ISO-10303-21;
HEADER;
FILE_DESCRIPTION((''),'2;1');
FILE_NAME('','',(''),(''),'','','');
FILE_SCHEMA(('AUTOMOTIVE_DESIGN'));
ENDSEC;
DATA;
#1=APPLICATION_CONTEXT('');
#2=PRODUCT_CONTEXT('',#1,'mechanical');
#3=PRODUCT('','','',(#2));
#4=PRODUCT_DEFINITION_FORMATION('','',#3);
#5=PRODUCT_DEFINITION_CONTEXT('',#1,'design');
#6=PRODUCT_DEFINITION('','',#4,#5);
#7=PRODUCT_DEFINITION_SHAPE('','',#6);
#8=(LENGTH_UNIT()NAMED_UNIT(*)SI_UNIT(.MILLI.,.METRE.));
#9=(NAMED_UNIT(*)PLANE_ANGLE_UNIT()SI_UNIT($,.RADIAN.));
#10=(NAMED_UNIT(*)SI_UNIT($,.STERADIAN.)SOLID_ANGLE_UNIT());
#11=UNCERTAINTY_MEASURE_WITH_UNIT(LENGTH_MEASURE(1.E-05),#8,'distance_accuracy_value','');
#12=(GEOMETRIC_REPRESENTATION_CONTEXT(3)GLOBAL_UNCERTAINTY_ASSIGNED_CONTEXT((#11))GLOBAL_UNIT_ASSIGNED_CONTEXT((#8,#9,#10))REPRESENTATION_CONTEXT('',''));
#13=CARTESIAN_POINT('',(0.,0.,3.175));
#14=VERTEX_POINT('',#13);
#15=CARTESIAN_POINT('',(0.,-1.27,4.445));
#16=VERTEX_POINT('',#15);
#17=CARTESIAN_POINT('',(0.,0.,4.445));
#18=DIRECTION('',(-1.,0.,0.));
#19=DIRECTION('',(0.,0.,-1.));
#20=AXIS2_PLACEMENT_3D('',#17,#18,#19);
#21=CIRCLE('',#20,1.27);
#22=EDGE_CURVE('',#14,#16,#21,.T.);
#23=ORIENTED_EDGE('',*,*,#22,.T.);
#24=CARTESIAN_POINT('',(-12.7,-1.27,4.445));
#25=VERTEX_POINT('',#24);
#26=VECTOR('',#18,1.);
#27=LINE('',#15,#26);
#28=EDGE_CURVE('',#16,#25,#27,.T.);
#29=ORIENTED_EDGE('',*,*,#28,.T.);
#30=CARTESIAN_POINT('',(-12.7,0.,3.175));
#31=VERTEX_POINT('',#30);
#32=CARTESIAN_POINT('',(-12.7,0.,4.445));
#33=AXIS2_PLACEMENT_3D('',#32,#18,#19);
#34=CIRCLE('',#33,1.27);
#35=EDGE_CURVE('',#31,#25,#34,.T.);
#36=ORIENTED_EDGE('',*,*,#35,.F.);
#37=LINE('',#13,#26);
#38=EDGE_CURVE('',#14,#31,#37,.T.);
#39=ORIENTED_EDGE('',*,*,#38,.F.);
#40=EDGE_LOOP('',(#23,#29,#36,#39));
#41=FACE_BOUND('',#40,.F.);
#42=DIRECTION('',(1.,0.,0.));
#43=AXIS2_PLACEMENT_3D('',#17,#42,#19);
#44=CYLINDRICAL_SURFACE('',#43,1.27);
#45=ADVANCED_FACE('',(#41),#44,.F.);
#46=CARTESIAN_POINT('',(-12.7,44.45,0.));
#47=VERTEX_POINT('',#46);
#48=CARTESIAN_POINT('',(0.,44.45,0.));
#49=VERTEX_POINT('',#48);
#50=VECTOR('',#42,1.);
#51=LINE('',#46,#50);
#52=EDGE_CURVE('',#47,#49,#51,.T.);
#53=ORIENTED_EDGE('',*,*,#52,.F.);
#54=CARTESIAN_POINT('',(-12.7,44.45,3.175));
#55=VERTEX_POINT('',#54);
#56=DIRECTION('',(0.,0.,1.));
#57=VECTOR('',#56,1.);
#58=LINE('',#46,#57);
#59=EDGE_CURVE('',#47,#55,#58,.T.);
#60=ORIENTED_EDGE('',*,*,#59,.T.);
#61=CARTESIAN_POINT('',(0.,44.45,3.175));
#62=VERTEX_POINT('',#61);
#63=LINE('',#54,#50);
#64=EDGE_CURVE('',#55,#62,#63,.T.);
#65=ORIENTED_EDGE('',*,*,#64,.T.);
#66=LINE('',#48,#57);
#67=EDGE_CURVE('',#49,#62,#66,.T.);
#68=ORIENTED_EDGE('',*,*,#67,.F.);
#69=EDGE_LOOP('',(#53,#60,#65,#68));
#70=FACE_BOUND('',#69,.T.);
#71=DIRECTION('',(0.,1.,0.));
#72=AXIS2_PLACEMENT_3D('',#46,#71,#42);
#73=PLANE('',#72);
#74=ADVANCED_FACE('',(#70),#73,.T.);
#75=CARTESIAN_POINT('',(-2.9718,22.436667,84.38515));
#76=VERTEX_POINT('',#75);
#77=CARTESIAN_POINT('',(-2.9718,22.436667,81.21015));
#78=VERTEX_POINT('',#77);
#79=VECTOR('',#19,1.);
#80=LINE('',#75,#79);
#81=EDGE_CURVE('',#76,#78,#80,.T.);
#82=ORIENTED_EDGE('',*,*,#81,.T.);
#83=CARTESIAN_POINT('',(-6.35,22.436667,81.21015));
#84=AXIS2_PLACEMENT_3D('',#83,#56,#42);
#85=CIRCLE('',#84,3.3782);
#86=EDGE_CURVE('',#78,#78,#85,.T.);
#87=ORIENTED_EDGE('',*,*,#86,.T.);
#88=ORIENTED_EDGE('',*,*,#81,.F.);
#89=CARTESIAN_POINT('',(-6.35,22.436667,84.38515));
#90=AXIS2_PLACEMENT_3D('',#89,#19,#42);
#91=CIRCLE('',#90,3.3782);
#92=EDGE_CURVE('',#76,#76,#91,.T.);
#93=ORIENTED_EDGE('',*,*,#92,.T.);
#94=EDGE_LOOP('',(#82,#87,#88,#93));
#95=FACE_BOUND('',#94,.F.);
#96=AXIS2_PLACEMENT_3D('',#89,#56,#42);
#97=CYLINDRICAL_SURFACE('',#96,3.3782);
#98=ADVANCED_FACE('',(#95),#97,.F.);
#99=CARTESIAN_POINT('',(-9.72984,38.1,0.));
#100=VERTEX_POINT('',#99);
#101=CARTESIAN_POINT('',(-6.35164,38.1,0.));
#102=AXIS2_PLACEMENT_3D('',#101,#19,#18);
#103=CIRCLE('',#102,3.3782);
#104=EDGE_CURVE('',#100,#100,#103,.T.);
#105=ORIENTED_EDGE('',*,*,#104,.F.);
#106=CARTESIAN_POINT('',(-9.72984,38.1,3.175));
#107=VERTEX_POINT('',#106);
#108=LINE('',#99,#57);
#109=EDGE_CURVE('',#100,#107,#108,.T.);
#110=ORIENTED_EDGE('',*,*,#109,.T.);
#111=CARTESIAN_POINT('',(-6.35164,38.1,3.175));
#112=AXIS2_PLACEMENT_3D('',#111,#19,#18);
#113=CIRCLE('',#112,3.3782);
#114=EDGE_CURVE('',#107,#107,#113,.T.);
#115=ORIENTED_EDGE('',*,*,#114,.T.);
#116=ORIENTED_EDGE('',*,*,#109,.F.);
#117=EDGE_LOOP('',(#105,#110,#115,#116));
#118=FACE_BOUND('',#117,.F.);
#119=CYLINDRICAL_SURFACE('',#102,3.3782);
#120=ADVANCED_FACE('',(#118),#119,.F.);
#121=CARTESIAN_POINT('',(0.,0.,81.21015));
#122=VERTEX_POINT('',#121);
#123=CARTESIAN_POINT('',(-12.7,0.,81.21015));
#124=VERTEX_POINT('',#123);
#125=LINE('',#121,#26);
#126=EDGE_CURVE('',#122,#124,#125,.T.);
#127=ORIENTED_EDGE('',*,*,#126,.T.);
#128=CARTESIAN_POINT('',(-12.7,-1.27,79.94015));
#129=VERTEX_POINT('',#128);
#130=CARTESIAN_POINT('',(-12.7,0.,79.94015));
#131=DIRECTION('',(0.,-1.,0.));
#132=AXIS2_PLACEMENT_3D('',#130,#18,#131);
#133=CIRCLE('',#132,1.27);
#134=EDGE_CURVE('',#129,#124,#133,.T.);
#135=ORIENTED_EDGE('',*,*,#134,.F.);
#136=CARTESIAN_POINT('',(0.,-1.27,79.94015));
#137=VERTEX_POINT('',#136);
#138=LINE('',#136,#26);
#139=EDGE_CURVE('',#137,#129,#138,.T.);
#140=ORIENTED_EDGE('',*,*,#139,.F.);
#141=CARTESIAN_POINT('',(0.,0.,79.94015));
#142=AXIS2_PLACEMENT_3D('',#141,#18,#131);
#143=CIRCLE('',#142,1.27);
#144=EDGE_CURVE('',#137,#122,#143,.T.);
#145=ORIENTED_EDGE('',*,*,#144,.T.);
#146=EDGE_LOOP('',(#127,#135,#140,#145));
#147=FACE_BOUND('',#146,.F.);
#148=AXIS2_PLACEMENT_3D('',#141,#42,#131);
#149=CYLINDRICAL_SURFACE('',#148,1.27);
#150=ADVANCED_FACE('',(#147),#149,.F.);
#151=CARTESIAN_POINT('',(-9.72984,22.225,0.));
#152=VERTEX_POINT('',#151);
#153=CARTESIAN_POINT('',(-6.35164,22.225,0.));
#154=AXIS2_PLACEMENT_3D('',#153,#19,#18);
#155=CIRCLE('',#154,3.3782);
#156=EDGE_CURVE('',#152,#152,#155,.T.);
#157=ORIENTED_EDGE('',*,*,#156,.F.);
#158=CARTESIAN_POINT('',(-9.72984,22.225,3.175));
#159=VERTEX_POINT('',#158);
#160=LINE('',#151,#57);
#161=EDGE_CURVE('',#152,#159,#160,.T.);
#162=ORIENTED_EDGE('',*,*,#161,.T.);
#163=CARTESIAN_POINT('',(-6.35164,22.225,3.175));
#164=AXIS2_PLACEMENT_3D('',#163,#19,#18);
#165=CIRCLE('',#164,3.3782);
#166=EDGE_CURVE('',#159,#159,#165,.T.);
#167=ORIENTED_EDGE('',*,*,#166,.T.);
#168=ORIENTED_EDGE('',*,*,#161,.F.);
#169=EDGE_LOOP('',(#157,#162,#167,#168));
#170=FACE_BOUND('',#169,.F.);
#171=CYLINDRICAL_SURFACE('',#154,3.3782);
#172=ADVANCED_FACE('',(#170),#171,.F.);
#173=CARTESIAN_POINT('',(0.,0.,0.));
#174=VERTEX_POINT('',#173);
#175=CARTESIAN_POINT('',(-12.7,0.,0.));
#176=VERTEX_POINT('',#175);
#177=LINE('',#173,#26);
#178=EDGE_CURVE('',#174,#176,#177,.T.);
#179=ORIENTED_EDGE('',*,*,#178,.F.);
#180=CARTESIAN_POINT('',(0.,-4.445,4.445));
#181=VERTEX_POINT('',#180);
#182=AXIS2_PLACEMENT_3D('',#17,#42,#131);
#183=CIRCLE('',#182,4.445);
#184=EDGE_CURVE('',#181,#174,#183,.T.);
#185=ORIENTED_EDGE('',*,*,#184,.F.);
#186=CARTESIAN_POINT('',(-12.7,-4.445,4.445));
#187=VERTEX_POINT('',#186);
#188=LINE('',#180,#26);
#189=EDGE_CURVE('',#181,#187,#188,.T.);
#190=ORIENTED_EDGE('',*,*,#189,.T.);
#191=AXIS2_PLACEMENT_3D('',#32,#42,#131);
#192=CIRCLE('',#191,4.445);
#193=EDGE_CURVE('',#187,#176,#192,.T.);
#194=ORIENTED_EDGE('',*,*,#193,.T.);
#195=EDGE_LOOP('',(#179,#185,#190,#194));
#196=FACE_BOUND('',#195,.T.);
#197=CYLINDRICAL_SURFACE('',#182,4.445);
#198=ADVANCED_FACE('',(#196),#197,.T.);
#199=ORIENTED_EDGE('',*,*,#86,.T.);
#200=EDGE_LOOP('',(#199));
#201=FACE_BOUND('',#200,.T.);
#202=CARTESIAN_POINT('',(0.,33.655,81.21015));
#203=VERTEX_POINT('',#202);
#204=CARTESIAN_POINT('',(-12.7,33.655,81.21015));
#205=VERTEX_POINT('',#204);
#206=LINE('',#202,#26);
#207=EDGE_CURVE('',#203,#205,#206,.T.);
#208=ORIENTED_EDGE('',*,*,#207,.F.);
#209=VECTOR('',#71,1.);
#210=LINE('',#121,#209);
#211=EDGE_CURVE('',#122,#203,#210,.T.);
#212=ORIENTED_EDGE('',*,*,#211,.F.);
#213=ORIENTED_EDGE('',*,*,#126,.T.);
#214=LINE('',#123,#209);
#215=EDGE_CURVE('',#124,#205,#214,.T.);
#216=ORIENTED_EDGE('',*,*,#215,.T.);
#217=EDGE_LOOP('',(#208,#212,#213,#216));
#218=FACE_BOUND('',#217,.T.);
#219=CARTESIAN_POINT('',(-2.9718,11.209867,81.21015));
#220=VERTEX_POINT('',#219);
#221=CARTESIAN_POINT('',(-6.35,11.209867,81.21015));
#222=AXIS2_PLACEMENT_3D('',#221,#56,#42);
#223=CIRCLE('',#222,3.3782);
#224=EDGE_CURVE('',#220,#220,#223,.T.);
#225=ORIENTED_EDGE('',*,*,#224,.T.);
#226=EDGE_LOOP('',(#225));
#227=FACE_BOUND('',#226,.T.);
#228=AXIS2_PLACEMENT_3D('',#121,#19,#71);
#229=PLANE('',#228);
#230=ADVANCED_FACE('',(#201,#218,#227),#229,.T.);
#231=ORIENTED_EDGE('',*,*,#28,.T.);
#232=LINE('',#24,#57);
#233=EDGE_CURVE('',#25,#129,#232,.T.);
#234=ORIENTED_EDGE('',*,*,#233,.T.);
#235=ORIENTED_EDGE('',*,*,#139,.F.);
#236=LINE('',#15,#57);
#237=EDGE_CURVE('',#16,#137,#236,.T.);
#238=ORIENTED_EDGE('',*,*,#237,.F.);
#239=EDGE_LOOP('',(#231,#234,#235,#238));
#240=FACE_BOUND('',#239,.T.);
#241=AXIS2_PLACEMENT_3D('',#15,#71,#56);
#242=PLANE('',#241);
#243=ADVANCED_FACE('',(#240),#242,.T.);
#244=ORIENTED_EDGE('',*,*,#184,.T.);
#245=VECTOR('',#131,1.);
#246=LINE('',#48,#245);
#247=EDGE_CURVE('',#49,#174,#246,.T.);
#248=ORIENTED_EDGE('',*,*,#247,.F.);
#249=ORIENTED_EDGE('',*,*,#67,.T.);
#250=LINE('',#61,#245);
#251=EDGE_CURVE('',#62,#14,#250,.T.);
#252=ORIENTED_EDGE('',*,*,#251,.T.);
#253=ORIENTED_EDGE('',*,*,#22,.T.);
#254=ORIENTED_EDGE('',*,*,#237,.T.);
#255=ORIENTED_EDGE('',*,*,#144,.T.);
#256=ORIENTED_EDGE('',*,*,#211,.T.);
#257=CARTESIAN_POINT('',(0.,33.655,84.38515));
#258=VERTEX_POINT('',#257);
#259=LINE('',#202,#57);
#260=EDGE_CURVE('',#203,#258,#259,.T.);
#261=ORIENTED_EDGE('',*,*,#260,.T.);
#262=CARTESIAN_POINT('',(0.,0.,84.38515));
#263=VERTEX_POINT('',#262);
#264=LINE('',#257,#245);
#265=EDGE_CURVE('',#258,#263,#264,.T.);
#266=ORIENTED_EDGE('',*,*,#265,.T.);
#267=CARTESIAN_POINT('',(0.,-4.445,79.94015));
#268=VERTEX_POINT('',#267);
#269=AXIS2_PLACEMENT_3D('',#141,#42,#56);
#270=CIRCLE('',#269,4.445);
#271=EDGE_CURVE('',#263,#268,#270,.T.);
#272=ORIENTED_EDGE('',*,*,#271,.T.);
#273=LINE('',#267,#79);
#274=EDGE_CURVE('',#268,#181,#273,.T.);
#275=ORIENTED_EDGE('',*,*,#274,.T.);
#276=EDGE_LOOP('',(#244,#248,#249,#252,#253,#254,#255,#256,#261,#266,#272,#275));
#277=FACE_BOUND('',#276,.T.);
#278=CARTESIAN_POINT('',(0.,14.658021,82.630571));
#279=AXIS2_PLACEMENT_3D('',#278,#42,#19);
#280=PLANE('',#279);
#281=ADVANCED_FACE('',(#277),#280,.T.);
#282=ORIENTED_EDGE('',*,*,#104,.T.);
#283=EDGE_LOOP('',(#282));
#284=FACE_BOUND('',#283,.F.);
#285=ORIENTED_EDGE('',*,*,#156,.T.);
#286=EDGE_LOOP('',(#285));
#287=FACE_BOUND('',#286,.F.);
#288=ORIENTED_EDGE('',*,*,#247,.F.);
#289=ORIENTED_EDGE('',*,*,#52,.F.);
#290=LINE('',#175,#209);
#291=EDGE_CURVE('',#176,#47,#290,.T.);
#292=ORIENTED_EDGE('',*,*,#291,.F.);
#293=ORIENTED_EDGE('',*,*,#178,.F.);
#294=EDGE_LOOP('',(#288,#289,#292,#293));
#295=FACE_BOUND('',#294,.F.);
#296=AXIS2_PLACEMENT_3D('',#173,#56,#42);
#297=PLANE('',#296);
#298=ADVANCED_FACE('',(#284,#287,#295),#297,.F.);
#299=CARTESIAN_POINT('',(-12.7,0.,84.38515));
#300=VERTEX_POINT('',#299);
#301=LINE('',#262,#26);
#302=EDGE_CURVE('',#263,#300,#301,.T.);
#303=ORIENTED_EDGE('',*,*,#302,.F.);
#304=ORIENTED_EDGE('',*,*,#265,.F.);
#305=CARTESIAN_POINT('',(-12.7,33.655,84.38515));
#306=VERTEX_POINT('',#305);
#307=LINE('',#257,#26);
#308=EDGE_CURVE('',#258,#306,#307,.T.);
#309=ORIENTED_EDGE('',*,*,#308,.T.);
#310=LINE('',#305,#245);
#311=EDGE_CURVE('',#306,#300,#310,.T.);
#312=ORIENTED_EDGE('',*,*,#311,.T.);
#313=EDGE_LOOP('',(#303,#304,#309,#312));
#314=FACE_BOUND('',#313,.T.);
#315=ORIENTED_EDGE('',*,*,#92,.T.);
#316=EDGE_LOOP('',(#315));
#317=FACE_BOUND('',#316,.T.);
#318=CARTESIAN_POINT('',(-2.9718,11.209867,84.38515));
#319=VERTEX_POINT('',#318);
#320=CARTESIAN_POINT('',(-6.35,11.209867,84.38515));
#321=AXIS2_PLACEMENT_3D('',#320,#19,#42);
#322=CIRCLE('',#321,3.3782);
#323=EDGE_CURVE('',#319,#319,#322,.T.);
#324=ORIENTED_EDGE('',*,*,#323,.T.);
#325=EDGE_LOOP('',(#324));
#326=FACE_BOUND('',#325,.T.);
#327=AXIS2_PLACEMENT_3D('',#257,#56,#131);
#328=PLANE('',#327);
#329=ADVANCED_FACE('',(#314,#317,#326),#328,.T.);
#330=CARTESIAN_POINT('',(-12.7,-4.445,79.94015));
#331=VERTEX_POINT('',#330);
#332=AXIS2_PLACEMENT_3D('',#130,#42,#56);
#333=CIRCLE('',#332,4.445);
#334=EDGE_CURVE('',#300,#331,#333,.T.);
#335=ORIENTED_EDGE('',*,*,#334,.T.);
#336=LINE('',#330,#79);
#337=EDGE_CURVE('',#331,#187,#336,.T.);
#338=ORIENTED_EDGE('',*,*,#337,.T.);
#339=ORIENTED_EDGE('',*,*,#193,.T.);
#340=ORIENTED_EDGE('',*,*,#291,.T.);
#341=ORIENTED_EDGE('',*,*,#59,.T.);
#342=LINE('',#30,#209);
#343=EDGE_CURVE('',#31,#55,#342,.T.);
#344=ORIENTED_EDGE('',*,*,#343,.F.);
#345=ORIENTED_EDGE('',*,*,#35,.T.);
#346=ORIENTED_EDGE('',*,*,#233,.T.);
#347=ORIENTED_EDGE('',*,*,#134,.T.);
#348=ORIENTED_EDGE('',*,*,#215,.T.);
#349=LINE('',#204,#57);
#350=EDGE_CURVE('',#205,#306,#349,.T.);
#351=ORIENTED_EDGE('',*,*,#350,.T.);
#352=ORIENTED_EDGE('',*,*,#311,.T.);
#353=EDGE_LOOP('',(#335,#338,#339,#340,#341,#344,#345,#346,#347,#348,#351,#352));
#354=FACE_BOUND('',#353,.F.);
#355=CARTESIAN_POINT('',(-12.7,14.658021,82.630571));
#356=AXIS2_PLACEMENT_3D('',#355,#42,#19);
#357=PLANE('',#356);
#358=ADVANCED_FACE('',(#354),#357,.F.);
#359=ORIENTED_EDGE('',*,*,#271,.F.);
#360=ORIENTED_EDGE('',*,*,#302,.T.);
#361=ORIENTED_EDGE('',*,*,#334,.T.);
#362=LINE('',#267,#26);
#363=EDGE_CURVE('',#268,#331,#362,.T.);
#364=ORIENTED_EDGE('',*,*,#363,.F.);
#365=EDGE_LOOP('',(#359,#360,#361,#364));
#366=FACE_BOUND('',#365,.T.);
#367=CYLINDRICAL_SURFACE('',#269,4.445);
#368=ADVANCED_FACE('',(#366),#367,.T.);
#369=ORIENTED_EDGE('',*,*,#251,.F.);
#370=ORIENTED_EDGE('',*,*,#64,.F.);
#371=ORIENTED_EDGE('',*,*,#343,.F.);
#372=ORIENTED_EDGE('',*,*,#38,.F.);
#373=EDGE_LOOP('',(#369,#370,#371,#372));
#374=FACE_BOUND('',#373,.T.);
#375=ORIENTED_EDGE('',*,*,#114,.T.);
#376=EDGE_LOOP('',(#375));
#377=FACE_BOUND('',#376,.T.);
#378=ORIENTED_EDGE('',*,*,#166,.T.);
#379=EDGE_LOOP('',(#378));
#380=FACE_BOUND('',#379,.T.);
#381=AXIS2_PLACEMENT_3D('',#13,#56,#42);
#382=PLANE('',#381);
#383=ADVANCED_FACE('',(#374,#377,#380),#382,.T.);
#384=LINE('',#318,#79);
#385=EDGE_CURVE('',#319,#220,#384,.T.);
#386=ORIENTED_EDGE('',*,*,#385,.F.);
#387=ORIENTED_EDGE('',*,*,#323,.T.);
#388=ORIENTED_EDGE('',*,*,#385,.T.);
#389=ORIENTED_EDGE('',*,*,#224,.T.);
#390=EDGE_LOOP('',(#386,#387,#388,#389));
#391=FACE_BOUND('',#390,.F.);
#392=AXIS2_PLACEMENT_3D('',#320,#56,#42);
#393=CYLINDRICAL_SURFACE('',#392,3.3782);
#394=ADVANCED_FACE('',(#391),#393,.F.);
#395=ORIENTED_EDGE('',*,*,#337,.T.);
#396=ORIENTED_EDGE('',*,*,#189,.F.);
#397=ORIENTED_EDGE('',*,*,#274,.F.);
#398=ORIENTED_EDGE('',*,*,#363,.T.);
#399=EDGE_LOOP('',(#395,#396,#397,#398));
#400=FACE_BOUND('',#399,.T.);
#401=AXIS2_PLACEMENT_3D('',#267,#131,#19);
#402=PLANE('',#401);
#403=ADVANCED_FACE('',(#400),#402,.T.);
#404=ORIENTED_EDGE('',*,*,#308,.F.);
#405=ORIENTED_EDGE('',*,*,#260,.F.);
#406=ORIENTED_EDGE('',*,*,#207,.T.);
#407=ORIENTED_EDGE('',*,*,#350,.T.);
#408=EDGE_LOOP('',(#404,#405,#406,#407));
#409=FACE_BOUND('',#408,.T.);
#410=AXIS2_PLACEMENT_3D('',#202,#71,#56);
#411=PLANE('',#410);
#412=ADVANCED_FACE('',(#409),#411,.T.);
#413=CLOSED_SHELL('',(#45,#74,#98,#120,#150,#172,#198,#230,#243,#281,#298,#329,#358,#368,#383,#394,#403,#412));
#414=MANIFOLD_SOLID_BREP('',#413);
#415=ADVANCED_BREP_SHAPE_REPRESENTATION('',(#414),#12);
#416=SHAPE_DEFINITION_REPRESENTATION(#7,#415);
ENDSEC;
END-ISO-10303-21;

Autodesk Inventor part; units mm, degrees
ref_plane "YZ Plane" through (0, 0, 0) normal (1, 0, 0) x (0, 1, 0)
ref_plane "XZ Plane" through (0, 0, 0) normal (0, 1, 0) x (-1, 0, 0)
ref_plane "XY Plane" through (0, 0, 0) normal (0, 0, 1) x (1, 0, 0)
sketch "Sketch1" plane through (0, 0, 0) normal (0, 0, 1) x (1, 0, 0)
  line L0 (0, 0) -> (161.978778, 0)
  line L1 (161.978778, -12.7) -> (0, -12.7)
  line L2 (0, 0) -> (35.7378, 0)
  line L3 (35.7378, 0) -> (35.7378, -1.5875)
  line L4 (35.7378, -1.5875) -> (36.53155, -1.5875)
  line L5 (36.53155, -1.5875) -> (36.53155, 0)
  line L6 (35.7378, -1.5875) -> (34.94405, -1.5875)
  line L7 (34.94405, -1.5875) -> (34.94405, 0)
  line L8 (36.53155, -12.7) -> (34.94405, -12.7)
  line L9 (34.94405, -12.7) -> (34.94405, -11.1125)
  line L10 (34.94405, -11.1125) -> (36.53155, -11.1125)
  line L11 (36.53155, -11.1125) -> (36.53155, -12.7)
  line L12 (161.978778, 0) -> (151.640978, 0)
sketch "Sketch3" plane through (0, 0, 0) normal (0, 0, -1) x (-1, 0, 0)
  circle A0 centre (6.35164, 38.1) radius 3.3782
  circle A1 centre (6.35164, 22.225) radius 3.3782
sketch "Sketch6" plane through (-12.7, 33.655, 84.38515) normal (0, 0, 1) x (1, 0, 0)
  line L0 (0, 0) -> (12.7, 0)
  line L1 (0, -33.655) -> (0, 0)
  line L2 (6.35, 0) -> (6.35, -11.218333)
  line L3 (6.35, -11.218333) -> (6.35, -22.445133)
  circle A0 centre (6.35, -11.218333) radius 3.3782
  circle A1 centre (6.35, -22.445133) radius 3.3782
  dimension "d29" = 11.21833
  dimension "d31" = 11.2268
  dimension "d32" = 6.7564
  dimension "d33" = 6.7564
sketch "Sketch1 outline for Plate1" plane through (0, 0, 0) normal (0, 0, 1) x (1, 0, 0)
  line L0 (0, 0) -> (-12.7, 0)
  line L1 (-12.7, 0) -> (-12.7, 44.45)
  line L2 (-12.7, 44.45) -> (0, 44.45)
  line L3 (0, 44.45) -> (0, 0)
extrude "Plate1" add sketch "Sketch1 outline for Plate1" along normal blind 3.175
sketch "Sketch2" plane through (0, -12.7, 0) normal (0, 0, 1) x (1, 0, 0)
  line L0 (35.7378, 11.1125) -> (35.7378, 12.7)
  line L1 (0, 12.7) -> (35.7378, 12.7)
  line L2 (36.53155, 12.7) -> (161.978778, 12.7)
  line L3 (35.7378, 11.1125) -> (34.94405, 11.1125)
  line L4 (34.94405, 11.1125) -> (34.94405, 12.7)
edge flange "Flange1" height 79.94015 angle 90 thickness 3.175 bend radius 1.27 thickness toward (0, -1, 0) relief straight relief width 3.175 relief depth 1.5875 edges at (-6.35, 0, 3.175) wall of the first edge with corners at (-12.7, -1.27, 4.445) (0, -1.27, 4.445) (0, -1.27, 79.94015) (-12.7, -1.27, 79.94015)
bend "Bend1"
corner "Corner1"
sketch "Sketch4" plane through (0, -12.7, 0) normal (0, 0, 1) x (1, 0, 0)
  line L0 (161.978778, 0) -> (36.53155, 0)
  line L1 (36.53155, 12.7) -> (161.978778, 12.7)
  line L2 (161.978778, 12.7) -> (115.445978, 12.7)
  line L3 (115.445978, 12.7) -> (115.445978, 11.1125)
  line L4 (115.445978, 11.1125) -> (116.239728, 11.1125)
  line L5 (116.239728, 11.1125) -> (116.239728, 12.7)
  line L6 (115.445978, 11.1125) -> (114.652228, 11.1125)
  line L7 (114.652228, 11.1125) -> (114.652228, 12.7)
  line L8 (140.845978, 0) -> (141.639728, 0)
  line L9 (141.639728, 0) -> (141.639728, 1.5875)
  line L10 (141.639728, 1.5875) -> (140.052228, 1.5875)
  line L11 (140.052228, 1.5875) -> (140.052228, 0)
  dimension "d15" = 1.5875
extrude "Cut1" cut sketch "Sketch3" against normal blind 3.175
sketch "Sketch5" plane through (0, -12.7, 0) normal (0, 0, 1) x (1, 0, 0)
  line L0 (115.445978, 12.7) -> (115.445978, 11.1125)
  line L1 (115.445978, 12.7) -> (161.978778, 12.7)
  line L2 (115.445978, 11.1125) -> (116.239728, 11.1125)
  line L3 (116.239728, 11.1125) -> (116.239728, 12.7)
edge flange "Flange2" height 38.1 angle 90 thickness 3.175 bend radius 1.27 thickness toward (0, 0, 1) relief straight relief width 3.175 relief depth 1.5875 edges at (-6.35, -1.27, 79.94015) wall of the first edge with corners at (-12.7, 0, 81.21015) (0, 0, 81.21015) (0, 33.655, 81.21015) (-12.7, 33.655, 81.21015)
bend "Bend2"
corner "Corner2"
extrude "Cut3" cut sketch "Sketch6" against normal blind 3.175
equation "\"d3\" = BendReliefWidth"
equation "\"d4\" = BendReliefDepth"
equation "\"d5\" = MinimumRemnant"
equation "\"d6\" = BendRadius"
equation "\"d10\" = CornerReliefSize"
equation "\"d11\" = GapSize"
equation "\"d12\" = JacobiRadiusSize"
equation "\"d19\" = BendReliefWidth"
equation "\"d20\" = BendReliefDepth"
equation "\"d21\" = MinimumRemnant"
equation "\"d22\" = BendRadius"
equation "\"d26\" = CornerReliefSize"
equation "\"d27\" = GapSize"
equation "\"d28\" = JacobiRadiusSize"
equation "\"BendRadius\" = Thickness"
equation "\"BendReliefWidth\" = Thickness"
equation "\"BendReliefDepth\" = 0.5 * Thickness"
equation "\"CornerReliefSize\" = 4 * Thickness"
equation "\"MinimumRemnant\" = 2 * Thickness"
equation "\"TransitionRadius\" = BendRadius"
equation "\"JacobiRadiusSize\" = Thickness"
equation "\"GapSize\" = Thickness"
equation "\"d2\" = BendRadius"
equation "\"d6\" = Thickness"
equation "\"d16\" = Thickness"
equation "\"Thickness\" = 3.175"
properties part number "M - bottom pulley mount v2" material "Aluminum 6061"
